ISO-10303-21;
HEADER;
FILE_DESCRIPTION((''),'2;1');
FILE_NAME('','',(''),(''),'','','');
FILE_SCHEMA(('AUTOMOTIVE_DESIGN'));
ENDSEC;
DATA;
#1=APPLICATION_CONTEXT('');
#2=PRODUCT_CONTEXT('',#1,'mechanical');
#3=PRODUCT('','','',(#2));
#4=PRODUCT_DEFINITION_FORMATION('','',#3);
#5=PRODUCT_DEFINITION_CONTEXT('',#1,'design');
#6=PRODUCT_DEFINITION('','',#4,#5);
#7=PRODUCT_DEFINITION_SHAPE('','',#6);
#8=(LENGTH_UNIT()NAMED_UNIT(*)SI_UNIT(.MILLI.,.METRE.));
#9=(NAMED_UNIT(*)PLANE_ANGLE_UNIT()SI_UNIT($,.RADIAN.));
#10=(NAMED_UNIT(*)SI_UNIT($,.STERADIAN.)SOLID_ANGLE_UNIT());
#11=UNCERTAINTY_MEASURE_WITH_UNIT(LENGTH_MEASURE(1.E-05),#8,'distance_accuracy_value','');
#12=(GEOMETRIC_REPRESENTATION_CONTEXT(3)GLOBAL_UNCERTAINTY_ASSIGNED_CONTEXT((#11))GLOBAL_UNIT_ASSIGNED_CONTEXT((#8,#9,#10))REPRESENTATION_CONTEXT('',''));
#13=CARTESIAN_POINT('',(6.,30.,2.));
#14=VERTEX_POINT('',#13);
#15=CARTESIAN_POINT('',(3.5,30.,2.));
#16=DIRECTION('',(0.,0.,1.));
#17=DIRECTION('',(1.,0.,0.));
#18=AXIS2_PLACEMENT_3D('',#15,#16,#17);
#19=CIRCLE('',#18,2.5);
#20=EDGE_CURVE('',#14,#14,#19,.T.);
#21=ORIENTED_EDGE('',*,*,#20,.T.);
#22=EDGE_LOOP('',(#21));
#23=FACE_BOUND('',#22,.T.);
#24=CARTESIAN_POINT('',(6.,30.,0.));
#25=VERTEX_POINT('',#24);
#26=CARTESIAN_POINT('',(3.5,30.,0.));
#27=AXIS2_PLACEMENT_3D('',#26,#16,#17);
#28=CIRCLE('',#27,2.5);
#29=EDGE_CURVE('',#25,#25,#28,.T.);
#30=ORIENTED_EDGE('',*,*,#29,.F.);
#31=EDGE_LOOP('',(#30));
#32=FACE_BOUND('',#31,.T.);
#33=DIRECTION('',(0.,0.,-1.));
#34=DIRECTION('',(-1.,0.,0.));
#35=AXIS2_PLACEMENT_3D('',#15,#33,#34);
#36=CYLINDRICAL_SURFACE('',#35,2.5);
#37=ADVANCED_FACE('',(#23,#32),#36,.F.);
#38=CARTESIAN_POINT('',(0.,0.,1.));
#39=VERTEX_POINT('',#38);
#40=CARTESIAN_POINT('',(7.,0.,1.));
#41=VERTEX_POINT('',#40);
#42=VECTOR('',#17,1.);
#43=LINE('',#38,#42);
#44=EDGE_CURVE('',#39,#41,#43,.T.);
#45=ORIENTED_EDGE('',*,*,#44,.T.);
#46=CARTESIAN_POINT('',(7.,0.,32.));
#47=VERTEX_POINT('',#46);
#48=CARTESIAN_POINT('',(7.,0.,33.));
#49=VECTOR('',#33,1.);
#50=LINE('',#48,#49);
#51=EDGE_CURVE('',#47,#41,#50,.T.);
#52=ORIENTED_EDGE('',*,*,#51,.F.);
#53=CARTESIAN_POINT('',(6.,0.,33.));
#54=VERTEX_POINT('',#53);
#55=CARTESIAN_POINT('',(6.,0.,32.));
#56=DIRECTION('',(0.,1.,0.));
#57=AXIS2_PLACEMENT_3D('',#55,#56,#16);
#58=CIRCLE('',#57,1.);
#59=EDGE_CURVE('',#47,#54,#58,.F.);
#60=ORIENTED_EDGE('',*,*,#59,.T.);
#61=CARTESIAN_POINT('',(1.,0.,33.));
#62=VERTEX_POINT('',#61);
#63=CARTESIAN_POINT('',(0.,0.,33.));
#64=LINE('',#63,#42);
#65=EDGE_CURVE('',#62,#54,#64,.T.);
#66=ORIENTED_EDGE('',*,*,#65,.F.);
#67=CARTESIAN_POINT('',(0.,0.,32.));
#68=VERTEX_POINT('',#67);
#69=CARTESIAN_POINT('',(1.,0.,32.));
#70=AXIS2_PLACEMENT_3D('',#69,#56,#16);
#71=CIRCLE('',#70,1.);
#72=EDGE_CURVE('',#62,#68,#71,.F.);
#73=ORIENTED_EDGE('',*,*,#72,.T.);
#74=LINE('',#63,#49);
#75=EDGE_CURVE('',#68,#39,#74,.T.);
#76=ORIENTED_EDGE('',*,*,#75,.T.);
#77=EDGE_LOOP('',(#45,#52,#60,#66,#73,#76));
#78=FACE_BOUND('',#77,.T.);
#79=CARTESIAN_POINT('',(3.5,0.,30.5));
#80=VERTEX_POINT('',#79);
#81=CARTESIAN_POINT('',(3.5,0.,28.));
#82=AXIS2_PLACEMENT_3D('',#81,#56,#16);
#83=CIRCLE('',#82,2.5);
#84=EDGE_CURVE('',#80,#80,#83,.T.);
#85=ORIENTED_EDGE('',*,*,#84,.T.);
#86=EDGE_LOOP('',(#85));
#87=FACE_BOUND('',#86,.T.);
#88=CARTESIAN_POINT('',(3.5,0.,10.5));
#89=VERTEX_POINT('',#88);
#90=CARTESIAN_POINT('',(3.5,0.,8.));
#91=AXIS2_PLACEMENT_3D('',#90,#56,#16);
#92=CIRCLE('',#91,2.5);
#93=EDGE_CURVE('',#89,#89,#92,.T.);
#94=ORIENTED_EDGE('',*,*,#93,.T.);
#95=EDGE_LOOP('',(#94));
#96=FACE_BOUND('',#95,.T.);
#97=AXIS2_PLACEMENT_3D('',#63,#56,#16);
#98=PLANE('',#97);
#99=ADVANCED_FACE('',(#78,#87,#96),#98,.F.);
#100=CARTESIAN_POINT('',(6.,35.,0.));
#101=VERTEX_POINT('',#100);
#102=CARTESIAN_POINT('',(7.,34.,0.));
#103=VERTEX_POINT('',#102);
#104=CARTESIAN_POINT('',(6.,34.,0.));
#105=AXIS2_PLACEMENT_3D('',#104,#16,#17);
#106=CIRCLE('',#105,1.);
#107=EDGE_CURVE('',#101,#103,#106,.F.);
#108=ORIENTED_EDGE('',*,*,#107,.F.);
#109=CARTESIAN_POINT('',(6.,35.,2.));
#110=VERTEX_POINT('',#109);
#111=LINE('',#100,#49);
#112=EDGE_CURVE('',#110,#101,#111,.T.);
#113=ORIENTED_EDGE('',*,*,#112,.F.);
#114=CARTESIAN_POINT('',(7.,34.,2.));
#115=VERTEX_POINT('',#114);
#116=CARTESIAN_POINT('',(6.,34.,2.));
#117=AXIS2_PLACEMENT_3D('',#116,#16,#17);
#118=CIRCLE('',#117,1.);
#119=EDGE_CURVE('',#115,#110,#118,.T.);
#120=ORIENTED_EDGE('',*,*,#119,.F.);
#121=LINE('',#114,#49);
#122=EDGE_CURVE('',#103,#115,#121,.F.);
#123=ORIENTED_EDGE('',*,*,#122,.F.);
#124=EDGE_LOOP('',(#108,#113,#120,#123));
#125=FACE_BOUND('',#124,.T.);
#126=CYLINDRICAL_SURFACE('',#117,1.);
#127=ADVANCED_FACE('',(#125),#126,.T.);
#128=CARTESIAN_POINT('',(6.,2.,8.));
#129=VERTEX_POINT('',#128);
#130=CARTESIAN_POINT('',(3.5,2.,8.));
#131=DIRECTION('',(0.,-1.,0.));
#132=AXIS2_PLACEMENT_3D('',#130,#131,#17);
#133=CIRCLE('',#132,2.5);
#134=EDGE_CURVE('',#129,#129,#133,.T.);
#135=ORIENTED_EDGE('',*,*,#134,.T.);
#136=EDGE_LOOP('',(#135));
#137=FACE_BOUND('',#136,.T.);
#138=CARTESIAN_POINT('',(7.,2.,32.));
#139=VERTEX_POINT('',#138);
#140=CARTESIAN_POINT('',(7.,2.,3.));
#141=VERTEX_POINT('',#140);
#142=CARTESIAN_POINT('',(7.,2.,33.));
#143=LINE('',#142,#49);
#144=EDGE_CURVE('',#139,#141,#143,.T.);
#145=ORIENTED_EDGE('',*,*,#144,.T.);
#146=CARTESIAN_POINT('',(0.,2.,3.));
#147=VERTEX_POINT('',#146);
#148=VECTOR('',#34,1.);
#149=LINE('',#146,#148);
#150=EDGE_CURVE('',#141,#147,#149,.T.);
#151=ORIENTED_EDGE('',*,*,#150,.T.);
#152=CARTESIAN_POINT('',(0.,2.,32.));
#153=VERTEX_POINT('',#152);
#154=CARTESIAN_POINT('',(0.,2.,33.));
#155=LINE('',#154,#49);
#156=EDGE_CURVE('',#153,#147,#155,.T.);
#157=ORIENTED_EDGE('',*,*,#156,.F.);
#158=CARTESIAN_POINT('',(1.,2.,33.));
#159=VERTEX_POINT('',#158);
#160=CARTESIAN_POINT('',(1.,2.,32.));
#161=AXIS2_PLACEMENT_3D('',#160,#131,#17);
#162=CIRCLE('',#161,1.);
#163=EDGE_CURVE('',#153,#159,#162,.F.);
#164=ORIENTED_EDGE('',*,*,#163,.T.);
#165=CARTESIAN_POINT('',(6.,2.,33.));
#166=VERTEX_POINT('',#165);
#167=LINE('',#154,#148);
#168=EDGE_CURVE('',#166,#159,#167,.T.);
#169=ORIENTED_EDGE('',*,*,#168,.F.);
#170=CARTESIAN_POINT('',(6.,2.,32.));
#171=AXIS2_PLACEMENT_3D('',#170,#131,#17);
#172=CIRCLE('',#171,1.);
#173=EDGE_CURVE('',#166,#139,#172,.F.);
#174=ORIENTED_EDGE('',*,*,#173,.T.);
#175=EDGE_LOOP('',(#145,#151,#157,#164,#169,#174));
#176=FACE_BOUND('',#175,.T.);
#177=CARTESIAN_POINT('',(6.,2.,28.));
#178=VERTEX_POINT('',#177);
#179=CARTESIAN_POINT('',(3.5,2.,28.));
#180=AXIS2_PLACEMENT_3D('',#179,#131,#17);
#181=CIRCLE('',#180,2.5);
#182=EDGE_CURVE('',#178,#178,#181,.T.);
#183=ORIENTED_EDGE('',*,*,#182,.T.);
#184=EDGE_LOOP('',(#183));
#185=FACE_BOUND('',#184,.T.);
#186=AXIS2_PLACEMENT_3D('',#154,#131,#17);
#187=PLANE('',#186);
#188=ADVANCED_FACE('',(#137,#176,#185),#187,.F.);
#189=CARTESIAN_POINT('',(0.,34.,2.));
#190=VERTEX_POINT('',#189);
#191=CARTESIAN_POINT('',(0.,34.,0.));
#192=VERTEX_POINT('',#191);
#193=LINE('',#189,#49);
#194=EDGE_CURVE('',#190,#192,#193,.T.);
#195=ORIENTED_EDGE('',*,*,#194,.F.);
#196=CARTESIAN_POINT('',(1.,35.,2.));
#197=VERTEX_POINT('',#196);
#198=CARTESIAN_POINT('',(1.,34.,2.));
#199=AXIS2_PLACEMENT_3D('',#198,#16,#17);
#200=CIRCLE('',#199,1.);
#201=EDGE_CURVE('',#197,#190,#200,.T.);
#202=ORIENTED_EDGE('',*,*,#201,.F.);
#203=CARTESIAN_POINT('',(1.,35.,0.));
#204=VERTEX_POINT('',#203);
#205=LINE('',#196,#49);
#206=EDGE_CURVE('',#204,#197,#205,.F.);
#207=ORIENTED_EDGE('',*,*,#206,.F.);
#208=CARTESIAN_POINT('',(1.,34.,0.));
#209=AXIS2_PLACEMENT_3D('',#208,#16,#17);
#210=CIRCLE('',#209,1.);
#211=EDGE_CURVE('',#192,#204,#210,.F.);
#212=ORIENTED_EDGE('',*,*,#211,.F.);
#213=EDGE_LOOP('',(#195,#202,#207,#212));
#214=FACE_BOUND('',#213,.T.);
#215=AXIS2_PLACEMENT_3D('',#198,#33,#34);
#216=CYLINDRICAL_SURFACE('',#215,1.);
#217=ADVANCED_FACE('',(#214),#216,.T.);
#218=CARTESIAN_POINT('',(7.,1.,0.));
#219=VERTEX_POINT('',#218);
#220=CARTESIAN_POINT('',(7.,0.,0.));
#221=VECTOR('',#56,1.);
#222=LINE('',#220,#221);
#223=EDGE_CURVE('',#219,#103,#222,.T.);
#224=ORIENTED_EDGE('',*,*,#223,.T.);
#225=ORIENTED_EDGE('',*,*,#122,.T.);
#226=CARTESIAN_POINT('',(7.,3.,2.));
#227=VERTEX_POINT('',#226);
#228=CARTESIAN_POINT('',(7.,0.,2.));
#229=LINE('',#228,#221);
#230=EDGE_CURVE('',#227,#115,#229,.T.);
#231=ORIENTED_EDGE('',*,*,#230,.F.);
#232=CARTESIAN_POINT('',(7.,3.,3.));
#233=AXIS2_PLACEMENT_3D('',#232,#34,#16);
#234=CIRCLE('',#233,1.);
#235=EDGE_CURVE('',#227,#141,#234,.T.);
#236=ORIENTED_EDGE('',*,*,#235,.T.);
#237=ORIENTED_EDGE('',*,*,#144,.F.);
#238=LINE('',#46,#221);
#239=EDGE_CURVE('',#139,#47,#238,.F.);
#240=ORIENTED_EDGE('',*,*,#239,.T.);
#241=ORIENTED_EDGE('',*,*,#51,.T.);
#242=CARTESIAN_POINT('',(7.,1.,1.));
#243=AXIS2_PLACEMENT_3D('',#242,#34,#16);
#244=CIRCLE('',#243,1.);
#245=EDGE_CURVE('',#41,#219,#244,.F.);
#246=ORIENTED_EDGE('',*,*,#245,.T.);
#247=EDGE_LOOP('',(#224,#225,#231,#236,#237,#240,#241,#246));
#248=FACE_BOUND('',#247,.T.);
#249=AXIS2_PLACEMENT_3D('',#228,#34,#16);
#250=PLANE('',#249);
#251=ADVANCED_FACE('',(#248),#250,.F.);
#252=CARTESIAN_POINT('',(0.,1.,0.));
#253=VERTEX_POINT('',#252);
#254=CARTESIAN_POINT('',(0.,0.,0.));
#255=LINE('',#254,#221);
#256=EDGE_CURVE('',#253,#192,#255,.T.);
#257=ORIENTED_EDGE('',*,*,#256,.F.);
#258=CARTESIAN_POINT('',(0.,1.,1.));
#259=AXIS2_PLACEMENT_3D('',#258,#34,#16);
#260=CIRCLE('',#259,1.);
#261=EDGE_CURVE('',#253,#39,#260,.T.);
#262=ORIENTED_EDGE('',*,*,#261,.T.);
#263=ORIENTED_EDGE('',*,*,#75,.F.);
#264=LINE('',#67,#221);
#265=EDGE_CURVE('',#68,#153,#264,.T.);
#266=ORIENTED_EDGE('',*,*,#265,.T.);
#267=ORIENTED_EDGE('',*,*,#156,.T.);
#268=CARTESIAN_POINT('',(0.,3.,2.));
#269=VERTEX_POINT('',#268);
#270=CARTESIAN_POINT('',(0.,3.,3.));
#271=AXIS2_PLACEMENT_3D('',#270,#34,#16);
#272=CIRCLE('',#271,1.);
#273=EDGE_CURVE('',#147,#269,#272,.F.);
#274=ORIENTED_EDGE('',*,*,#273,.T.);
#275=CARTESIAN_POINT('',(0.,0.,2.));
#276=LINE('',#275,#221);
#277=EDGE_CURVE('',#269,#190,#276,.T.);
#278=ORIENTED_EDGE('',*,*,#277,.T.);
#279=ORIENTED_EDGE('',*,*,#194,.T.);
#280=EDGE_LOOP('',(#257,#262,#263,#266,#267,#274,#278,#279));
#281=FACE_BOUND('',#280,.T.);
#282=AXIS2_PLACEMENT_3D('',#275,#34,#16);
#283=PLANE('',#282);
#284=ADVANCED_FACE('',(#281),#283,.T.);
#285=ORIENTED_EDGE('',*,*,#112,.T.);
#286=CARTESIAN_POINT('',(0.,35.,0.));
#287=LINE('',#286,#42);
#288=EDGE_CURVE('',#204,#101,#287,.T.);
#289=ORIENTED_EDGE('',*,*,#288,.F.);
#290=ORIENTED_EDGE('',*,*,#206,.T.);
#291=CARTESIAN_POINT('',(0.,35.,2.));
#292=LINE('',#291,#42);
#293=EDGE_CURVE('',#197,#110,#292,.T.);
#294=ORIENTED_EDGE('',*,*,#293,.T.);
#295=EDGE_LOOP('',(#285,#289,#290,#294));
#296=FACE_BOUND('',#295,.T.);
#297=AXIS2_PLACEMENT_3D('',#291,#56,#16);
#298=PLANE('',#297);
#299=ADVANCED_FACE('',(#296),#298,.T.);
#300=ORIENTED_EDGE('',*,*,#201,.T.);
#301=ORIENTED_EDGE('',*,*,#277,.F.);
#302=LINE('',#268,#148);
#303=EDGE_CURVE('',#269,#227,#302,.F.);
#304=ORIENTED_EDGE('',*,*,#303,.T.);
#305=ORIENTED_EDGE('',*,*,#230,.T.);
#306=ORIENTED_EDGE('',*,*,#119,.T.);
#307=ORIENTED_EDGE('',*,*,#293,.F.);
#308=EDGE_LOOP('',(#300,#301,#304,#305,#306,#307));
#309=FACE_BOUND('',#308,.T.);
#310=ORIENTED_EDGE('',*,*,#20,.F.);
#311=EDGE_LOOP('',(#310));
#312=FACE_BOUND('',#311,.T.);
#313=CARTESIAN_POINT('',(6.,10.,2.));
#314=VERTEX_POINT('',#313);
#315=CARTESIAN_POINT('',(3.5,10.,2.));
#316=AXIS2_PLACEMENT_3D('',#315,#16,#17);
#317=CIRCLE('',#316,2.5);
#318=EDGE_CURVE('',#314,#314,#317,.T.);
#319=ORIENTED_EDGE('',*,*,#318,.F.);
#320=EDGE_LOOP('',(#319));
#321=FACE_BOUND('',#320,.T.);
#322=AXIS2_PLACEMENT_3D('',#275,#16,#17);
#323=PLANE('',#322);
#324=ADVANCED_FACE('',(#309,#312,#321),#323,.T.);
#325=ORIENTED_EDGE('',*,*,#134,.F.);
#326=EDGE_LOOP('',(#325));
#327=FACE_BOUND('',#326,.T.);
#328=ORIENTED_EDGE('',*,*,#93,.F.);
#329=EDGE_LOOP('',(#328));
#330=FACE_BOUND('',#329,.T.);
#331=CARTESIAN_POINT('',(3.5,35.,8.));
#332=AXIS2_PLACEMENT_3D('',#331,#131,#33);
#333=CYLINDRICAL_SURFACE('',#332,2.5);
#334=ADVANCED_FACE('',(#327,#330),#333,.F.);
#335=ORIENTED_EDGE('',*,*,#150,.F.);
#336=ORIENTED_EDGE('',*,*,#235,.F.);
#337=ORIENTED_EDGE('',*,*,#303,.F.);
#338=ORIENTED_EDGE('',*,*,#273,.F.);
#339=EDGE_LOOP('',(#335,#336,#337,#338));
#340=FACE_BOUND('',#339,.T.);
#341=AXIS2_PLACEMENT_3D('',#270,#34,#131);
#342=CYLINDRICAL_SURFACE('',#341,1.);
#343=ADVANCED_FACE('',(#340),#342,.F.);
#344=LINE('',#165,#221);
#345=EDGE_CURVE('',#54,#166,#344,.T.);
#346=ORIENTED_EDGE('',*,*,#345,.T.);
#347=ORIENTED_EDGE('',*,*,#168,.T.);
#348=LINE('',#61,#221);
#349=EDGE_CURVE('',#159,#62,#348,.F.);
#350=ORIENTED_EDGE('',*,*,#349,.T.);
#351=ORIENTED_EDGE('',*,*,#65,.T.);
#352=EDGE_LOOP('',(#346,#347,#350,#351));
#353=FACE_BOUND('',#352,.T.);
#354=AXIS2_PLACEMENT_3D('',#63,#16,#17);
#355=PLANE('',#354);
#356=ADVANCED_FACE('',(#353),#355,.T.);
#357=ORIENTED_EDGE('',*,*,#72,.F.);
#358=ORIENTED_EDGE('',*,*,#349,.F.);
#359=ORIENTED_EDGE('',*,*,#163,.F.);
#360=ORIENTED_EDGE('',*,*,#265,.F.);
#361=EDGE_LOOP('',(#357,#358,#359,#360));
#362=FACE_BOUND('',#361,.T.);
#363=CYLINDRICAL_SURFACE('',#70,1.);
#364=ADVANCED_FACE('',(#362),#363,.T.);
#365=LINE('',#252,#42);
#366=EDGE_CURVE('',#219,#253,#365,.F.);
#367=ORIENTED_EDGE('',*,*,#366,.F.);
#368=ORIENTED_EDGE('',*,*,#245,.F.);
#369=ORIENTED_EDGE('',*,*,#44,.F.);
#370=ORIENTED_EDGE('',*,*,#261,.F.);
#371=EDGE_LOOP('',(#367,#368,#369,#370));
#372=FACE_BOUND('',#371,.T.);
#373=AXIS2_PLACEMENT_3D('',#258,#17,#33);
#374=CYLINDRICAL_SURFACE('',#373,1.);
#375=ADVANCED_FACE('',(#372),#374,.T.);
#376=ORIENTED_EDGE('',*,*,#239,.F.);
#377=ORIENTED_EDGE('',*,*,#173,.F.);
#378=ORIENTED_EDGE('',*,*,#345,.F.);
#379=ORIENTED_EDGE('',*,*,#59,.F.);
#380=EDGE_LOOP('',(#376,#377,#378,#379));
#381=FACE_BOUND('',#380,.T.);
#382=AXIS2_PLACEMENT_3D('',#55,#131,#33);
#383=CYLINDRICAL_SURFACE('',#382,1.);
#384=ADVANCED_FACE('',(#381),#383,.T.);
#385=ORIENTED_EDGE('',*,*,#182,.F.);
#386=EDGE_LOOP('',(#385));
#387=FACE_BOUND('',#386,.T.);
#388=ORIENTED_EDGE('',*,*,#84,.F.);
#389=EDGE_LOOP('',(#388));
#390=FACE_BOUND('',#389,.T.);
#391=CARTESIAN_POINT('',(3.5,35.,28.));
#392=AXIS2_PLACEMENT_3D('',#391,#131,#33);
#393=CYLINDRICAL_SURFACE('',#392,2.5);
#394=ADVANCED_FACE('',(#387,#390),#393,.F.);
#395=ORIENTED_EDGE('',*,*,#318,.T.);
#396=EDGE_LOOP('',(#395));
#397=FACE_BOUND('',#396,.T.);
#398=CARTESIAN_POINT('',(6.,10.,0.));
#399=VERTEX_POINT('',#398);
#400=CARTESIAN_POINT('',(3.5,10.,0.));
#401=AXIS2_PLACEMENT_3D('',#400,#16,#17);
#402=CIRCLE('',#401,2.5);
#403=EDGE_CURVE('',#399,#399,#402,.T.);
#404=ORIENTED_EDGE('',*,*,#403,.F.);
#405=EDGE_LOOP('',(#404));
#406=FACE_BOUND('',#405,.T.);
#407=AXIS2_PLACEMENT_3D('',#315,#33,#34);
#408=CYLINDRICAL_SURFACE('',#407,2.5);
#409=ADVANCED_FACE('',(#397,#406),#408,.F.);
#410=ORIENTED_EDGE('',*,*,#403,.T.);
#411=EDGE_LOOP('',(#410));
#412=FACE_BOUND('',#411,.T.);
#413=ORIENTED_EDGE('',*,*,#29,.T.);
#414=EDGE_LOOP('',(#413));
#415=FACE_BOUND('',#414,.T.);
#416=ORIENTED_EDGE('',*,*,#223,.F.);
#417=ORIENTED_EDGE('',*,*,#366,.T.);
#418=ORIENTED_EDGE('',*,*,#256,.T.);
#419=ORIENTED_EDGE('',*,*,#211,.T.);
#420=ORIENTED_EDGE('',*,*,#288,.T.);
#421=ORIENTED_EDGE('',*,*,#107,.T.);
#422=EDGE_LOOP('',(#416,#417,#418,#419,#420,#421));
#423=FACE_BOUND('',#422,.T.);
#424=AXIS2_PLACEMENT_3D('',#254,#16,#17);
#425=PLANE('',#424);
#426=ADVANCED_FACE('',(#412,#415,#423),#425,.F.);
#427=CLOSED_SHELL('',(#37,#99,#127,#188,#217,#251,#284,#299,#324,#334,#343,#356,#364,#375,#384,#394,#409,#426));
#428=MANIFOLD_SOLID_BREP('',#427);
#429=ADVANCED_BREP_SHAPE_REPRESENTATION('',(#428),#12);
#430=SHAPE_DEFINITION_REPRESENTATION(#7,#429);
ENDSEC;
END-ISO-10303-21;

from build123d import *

# Parameters (mm, degrees)
ESQUISSE1_W        = 7
ESQUISSE1_H        = 33
ESQUISSE1_R        = 2.5
BOSS_EXTRU_1_DEPTH = 2
ESQUISSE1_3_W      = 7
ESQUISSE1_3_H      = 2
BOSS_EXTRU_2_DEPTH = 33
CONG_2_DEPTH       = 7
CONG_2_2_OUTLINE_R = 2.5
CONG_2_2_DEPTH     = 2
CONG_2_START       = -1
CONG_2_3_DEPTH     = 4
CONG_2_4_DEPTH     = 9


with BuildPart() as part:
    # Esquisse1 → Boss.-Extru.1 (new body)
    with BuildSketch(Plane.XY):
        with Locations((3.5, 18.5)):
            Rectangle(ESQUISSE1_W, ESQUISSE1_H)
        with Locations((3.5, 10)):
            Circle(ESQUISSE1_R, mode=Mode.SUBTRACT)
        with Locations((3.5, 30)):
            Circle(ESQUISSE1_R, mode=Mode.SUBTRACT)
    extrude(amount=BOSS_EXTRU_1_DEPTH)

    # Esquisse1<3> → Boss.-Extru.2 (add)
    with BuildSketch(Plane.XY):
        with Locations((3.5, 1)):
            Rectangle(ESQUISSE1_3_W, ESQUISSE1_3_H)
    extrude(amount=BOSS_EXTRU_2_DEPTH)

    # Congé2: read off the stored shape, not the designer's step
    # Congé2 outline → Congé2 (add)
    with BuildSketch(Plane.YZ):
        with BuildLine():
            Line((2, 2), (3, 2))
            ThreePointArc((3, 2), (2.292893219, 2.292893219), (2, 3))
            Line((2, 3), (2, 2))
        make_face()
    extrude(amount=CONG_2_DEPTH)

    # Cong_2 2 outline → Cong_2 2 (cut)
    with BuildSketch(Plane(origin=(0, 0, 0), x_dir=(1, 0, 0), z_dir=(0, 1, 0))):
        with Locations((3.5, -8)):
            Circle(CONG_2_2_OUTLINE_R)
        with Locations((3.5, -28)):
            Circle(CONG_2_2_OUTLINE_R)
        with BuildLine():
            Line((7, -33), (7, -32))
            ThreePointArc((7, -32), (6.707106781, -32.707106781), (6, -33))
            Line((6, -33), (7, -33))
        make_face()
        with BuildLine():
            Line((0, -33), (1, -33))
            ThreePointArc((1, -33), (0.292893219, -32.707106781), (0, -32))
            Line((0, -32), (0, -33))
        make_face()
    extrude(amount=CONG_2_2_DEPTH, mode=Mode.SUBTRACT)

    # Cong_2 3 outline → Cong_2 3 (cut)
    with BuildSketch(Plane.XY.offset(CONG_2_START)):
        with BuildLine():
            ThreePointArc((0, 34), (0.292893219, 34.707106781), (1, 35))
            Line((1, 35), (0, 35))
            Line((0, 35), (0, 34))
        make_face()
        with BuildLine():
            ThreePointArc((6, 35), (6.707106781, 34.707106781), (7, 34))
            Line((7, 34), (7, 35))
            Line((7, 35), (6, 35))
        make_face()
    extrude(amount=CONG_2_3_DEPTH, mode=Mode.SUBTRACT)

    # Cong_2 4 outline → Cong_2 4 (cut)
    with BuildSketch(Plane.YZ.offset(CONG_2_START)):
        with BuildLine():
            ThreePointArc((1, 0), (0.292893219, 0.292893219), (0, 1))
            Line((0, 1), (0, 0))
            Line((0, 0), (1, 0))
        make_face()
    extrude(amount=CONG_2_4_DEPTH, mode=Mode.SUBTRACT)


solid = part.part
